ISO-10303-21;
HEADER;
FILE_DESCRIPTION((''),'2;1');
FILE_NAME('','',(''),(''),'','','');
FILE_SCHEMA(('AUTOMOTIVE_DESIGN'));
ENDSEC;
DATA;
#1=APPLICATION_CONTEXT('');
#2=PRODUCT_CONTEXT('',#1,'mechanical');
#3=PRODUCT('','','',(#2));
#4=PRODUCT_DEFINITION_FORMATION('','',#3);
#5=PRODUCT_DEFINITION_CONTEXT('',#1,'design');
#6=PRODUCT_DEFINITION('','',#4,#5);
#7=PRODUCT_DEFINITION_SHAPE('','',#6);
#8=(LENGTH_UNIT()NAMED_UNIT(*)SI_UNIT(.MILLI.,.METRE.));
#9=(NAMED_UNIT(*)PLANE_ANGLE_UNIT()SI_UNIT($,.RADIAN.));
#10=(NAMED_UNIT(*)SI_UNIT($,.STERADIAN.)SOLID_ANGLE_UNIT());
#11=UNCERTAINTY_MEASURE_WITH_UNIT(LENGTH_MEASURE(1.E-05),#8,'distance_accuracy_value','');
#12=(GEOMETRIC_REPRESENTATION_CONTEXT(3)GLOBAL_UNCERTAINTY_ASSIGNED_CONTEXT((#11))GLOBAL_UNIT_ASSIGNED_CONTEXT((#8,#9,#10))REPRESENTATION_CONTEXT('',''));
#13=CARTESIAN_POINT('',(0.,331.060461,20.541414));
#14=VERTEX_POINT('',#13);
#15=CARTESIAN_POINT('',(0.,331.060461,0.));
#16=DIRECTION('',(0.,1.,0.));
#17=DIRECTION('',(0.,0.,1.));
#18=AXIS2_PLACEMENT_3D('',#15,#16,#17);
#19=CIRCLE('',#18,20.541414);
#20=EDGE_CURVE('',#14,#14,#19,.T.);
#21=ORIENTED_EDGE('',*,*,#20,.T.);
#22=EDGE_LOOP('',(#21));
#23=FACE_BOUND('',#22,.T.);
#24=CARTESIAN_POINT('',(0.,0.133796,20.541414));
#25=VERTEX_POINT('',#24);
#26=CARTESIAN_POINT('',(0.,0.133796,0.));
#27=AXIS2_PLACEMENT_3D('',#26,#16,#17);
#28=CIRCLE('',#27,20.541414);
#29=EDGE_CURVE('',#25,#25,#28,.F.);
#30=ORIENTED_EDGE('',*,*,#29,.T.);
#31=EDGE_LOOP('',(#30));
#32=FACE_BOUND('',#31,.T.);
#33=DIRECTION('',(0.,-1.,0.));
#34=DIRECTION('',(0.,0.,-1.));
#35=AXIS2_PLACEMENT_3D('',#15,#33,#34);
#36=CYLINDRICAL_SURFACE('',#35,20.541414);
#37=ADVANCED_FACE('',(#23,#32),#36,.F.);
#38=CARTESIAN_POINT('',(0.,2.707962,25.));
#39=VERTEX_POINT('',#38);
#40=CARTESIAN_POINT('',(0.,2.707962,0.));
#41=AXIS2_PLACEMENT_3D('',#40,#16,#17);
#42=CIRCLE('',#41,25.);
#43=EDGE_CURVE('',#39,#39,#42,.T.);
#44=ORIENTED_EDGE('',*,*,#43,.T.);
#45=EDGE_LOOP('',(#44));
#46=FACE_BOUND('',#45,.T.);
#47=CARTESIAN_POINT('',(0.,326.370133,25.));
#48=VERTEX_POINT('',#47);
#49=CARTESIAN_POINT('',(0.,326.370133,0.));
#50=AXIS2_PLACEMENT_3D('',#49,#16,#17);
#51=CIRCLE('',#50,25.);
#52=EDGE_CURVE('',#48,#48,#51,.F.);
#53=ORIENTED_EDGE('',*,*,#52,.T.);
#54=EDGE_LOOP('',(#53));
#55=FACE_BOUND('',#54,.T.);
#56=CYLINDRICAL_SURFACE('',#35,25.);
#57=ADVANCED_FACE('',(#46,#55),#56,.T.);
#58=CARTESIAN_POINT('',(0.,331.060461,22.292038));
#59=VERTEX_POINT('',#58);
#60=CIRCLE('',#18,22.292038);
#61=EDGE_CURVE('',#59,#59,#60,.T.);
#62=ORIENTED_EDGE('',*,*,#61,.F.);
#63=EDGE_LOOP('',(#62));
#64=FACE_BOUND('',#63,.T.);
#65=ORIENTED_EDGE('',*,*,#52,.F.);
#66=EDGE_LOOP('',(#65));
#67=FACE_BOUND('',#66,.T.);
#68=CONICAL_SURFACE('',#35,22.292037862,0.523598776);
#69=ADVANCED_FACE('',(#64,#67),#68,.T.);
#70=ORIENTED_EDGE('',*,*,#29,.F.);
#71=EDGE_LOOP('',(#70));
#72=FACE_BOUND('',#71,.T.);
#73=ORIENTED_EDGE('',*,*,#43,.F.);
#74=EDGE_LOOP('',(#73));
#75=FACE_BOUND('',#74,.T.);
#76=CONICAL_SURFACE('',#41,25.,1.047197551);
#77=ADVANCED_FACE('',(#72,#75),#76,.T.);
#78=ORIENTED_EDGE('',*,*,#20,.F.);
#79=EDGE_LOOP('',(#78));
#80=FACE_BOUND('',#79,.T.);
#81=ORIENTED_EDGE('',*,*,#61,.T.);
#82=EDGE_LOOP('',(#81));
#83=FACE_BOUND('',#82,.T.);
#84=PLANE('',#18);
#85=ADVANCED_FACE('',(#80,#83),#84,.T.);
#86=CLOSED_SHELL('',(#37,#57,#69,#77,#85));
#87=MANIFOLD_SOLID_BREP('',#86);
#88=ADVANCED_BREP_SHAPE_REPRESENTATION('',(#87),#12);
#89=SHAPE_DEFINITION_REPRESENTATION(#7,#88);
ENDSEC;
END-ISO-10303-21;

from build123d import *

# Parameters (mm, degrees)
SKETCH1_R           = 25
BOSS_EXTRUDE1_DEPTH = 331.060461
SKETCH2_R           = 20.541414044
CUT_EXTRUDE1_DEPTH  = 333.942981361
CHAMFER1_SIZE       = 4.690328
CHAMFER1_SIZE_2     = 2.707962


with BuildPart() as part:
    # Sketch1 → Boss-Extrude1 (new body)
    with BuildSketch(Plane(origin=(0, 0, 0), x_dir=(1, 0, 0), z_dir=(0, 1, 0))):
        with Locations(Location((0, 0, 0), (0, 0, 270))):
            Circle(SKETCH1_R)
    extrude(amount=BOSS_EXTRUDE1_DEPTH)

    # Sketch2 → Cut-Extrude1 (cut, through all)
    with BuildSketch(Plane(origin=(0, 0, 0), x_dir=(1, 0, 0), z_dir=(0, 1, 0))):
        with Locations(Location((0, 0, 0), (0, 0, 270))):
            Circle(SKETCH2_R)
    extrude(amount=CUT_EXTRUDE1_DEPTH, mode=Mode.SUBTRACT)

    # Chamfer1
    # the kernel refuses this chamfer: 4.690328, 2.707962 mm, written as the material it takes off along each edge
    with BuildSketch(Plane(origin=(0, 331.060461, 0), x_dir=(0, 0, 1), z_dir=(-1, 0, 0))) as chamfer1_piece_1:
        Polygon((25, -CHAMFER1_SIZE), (25 - CHAMFER1_SIZE_2, 0), (25, 0), align=None)
    revolve(axis=Axis((0, 331.060461, 0), (0, 1, 0)), mode=Mode.SUBTRACT)
    with BuildSketch(Plane(origin=(0, 0, 0), x_dir=(0, 0, 1), z_dir=(-1, 0, 0))) as chamfer1_piece_2:
        Polygon((25, CHAMFER1_SIZE_2), (25 - CHAMFER1_SIZE, 0), (25, 0), align=None)
    revolve(axis=Axis((0, 0, 0), (0, 1, 0)), mode=Mode.SUBTRACT)


solid = part.part
